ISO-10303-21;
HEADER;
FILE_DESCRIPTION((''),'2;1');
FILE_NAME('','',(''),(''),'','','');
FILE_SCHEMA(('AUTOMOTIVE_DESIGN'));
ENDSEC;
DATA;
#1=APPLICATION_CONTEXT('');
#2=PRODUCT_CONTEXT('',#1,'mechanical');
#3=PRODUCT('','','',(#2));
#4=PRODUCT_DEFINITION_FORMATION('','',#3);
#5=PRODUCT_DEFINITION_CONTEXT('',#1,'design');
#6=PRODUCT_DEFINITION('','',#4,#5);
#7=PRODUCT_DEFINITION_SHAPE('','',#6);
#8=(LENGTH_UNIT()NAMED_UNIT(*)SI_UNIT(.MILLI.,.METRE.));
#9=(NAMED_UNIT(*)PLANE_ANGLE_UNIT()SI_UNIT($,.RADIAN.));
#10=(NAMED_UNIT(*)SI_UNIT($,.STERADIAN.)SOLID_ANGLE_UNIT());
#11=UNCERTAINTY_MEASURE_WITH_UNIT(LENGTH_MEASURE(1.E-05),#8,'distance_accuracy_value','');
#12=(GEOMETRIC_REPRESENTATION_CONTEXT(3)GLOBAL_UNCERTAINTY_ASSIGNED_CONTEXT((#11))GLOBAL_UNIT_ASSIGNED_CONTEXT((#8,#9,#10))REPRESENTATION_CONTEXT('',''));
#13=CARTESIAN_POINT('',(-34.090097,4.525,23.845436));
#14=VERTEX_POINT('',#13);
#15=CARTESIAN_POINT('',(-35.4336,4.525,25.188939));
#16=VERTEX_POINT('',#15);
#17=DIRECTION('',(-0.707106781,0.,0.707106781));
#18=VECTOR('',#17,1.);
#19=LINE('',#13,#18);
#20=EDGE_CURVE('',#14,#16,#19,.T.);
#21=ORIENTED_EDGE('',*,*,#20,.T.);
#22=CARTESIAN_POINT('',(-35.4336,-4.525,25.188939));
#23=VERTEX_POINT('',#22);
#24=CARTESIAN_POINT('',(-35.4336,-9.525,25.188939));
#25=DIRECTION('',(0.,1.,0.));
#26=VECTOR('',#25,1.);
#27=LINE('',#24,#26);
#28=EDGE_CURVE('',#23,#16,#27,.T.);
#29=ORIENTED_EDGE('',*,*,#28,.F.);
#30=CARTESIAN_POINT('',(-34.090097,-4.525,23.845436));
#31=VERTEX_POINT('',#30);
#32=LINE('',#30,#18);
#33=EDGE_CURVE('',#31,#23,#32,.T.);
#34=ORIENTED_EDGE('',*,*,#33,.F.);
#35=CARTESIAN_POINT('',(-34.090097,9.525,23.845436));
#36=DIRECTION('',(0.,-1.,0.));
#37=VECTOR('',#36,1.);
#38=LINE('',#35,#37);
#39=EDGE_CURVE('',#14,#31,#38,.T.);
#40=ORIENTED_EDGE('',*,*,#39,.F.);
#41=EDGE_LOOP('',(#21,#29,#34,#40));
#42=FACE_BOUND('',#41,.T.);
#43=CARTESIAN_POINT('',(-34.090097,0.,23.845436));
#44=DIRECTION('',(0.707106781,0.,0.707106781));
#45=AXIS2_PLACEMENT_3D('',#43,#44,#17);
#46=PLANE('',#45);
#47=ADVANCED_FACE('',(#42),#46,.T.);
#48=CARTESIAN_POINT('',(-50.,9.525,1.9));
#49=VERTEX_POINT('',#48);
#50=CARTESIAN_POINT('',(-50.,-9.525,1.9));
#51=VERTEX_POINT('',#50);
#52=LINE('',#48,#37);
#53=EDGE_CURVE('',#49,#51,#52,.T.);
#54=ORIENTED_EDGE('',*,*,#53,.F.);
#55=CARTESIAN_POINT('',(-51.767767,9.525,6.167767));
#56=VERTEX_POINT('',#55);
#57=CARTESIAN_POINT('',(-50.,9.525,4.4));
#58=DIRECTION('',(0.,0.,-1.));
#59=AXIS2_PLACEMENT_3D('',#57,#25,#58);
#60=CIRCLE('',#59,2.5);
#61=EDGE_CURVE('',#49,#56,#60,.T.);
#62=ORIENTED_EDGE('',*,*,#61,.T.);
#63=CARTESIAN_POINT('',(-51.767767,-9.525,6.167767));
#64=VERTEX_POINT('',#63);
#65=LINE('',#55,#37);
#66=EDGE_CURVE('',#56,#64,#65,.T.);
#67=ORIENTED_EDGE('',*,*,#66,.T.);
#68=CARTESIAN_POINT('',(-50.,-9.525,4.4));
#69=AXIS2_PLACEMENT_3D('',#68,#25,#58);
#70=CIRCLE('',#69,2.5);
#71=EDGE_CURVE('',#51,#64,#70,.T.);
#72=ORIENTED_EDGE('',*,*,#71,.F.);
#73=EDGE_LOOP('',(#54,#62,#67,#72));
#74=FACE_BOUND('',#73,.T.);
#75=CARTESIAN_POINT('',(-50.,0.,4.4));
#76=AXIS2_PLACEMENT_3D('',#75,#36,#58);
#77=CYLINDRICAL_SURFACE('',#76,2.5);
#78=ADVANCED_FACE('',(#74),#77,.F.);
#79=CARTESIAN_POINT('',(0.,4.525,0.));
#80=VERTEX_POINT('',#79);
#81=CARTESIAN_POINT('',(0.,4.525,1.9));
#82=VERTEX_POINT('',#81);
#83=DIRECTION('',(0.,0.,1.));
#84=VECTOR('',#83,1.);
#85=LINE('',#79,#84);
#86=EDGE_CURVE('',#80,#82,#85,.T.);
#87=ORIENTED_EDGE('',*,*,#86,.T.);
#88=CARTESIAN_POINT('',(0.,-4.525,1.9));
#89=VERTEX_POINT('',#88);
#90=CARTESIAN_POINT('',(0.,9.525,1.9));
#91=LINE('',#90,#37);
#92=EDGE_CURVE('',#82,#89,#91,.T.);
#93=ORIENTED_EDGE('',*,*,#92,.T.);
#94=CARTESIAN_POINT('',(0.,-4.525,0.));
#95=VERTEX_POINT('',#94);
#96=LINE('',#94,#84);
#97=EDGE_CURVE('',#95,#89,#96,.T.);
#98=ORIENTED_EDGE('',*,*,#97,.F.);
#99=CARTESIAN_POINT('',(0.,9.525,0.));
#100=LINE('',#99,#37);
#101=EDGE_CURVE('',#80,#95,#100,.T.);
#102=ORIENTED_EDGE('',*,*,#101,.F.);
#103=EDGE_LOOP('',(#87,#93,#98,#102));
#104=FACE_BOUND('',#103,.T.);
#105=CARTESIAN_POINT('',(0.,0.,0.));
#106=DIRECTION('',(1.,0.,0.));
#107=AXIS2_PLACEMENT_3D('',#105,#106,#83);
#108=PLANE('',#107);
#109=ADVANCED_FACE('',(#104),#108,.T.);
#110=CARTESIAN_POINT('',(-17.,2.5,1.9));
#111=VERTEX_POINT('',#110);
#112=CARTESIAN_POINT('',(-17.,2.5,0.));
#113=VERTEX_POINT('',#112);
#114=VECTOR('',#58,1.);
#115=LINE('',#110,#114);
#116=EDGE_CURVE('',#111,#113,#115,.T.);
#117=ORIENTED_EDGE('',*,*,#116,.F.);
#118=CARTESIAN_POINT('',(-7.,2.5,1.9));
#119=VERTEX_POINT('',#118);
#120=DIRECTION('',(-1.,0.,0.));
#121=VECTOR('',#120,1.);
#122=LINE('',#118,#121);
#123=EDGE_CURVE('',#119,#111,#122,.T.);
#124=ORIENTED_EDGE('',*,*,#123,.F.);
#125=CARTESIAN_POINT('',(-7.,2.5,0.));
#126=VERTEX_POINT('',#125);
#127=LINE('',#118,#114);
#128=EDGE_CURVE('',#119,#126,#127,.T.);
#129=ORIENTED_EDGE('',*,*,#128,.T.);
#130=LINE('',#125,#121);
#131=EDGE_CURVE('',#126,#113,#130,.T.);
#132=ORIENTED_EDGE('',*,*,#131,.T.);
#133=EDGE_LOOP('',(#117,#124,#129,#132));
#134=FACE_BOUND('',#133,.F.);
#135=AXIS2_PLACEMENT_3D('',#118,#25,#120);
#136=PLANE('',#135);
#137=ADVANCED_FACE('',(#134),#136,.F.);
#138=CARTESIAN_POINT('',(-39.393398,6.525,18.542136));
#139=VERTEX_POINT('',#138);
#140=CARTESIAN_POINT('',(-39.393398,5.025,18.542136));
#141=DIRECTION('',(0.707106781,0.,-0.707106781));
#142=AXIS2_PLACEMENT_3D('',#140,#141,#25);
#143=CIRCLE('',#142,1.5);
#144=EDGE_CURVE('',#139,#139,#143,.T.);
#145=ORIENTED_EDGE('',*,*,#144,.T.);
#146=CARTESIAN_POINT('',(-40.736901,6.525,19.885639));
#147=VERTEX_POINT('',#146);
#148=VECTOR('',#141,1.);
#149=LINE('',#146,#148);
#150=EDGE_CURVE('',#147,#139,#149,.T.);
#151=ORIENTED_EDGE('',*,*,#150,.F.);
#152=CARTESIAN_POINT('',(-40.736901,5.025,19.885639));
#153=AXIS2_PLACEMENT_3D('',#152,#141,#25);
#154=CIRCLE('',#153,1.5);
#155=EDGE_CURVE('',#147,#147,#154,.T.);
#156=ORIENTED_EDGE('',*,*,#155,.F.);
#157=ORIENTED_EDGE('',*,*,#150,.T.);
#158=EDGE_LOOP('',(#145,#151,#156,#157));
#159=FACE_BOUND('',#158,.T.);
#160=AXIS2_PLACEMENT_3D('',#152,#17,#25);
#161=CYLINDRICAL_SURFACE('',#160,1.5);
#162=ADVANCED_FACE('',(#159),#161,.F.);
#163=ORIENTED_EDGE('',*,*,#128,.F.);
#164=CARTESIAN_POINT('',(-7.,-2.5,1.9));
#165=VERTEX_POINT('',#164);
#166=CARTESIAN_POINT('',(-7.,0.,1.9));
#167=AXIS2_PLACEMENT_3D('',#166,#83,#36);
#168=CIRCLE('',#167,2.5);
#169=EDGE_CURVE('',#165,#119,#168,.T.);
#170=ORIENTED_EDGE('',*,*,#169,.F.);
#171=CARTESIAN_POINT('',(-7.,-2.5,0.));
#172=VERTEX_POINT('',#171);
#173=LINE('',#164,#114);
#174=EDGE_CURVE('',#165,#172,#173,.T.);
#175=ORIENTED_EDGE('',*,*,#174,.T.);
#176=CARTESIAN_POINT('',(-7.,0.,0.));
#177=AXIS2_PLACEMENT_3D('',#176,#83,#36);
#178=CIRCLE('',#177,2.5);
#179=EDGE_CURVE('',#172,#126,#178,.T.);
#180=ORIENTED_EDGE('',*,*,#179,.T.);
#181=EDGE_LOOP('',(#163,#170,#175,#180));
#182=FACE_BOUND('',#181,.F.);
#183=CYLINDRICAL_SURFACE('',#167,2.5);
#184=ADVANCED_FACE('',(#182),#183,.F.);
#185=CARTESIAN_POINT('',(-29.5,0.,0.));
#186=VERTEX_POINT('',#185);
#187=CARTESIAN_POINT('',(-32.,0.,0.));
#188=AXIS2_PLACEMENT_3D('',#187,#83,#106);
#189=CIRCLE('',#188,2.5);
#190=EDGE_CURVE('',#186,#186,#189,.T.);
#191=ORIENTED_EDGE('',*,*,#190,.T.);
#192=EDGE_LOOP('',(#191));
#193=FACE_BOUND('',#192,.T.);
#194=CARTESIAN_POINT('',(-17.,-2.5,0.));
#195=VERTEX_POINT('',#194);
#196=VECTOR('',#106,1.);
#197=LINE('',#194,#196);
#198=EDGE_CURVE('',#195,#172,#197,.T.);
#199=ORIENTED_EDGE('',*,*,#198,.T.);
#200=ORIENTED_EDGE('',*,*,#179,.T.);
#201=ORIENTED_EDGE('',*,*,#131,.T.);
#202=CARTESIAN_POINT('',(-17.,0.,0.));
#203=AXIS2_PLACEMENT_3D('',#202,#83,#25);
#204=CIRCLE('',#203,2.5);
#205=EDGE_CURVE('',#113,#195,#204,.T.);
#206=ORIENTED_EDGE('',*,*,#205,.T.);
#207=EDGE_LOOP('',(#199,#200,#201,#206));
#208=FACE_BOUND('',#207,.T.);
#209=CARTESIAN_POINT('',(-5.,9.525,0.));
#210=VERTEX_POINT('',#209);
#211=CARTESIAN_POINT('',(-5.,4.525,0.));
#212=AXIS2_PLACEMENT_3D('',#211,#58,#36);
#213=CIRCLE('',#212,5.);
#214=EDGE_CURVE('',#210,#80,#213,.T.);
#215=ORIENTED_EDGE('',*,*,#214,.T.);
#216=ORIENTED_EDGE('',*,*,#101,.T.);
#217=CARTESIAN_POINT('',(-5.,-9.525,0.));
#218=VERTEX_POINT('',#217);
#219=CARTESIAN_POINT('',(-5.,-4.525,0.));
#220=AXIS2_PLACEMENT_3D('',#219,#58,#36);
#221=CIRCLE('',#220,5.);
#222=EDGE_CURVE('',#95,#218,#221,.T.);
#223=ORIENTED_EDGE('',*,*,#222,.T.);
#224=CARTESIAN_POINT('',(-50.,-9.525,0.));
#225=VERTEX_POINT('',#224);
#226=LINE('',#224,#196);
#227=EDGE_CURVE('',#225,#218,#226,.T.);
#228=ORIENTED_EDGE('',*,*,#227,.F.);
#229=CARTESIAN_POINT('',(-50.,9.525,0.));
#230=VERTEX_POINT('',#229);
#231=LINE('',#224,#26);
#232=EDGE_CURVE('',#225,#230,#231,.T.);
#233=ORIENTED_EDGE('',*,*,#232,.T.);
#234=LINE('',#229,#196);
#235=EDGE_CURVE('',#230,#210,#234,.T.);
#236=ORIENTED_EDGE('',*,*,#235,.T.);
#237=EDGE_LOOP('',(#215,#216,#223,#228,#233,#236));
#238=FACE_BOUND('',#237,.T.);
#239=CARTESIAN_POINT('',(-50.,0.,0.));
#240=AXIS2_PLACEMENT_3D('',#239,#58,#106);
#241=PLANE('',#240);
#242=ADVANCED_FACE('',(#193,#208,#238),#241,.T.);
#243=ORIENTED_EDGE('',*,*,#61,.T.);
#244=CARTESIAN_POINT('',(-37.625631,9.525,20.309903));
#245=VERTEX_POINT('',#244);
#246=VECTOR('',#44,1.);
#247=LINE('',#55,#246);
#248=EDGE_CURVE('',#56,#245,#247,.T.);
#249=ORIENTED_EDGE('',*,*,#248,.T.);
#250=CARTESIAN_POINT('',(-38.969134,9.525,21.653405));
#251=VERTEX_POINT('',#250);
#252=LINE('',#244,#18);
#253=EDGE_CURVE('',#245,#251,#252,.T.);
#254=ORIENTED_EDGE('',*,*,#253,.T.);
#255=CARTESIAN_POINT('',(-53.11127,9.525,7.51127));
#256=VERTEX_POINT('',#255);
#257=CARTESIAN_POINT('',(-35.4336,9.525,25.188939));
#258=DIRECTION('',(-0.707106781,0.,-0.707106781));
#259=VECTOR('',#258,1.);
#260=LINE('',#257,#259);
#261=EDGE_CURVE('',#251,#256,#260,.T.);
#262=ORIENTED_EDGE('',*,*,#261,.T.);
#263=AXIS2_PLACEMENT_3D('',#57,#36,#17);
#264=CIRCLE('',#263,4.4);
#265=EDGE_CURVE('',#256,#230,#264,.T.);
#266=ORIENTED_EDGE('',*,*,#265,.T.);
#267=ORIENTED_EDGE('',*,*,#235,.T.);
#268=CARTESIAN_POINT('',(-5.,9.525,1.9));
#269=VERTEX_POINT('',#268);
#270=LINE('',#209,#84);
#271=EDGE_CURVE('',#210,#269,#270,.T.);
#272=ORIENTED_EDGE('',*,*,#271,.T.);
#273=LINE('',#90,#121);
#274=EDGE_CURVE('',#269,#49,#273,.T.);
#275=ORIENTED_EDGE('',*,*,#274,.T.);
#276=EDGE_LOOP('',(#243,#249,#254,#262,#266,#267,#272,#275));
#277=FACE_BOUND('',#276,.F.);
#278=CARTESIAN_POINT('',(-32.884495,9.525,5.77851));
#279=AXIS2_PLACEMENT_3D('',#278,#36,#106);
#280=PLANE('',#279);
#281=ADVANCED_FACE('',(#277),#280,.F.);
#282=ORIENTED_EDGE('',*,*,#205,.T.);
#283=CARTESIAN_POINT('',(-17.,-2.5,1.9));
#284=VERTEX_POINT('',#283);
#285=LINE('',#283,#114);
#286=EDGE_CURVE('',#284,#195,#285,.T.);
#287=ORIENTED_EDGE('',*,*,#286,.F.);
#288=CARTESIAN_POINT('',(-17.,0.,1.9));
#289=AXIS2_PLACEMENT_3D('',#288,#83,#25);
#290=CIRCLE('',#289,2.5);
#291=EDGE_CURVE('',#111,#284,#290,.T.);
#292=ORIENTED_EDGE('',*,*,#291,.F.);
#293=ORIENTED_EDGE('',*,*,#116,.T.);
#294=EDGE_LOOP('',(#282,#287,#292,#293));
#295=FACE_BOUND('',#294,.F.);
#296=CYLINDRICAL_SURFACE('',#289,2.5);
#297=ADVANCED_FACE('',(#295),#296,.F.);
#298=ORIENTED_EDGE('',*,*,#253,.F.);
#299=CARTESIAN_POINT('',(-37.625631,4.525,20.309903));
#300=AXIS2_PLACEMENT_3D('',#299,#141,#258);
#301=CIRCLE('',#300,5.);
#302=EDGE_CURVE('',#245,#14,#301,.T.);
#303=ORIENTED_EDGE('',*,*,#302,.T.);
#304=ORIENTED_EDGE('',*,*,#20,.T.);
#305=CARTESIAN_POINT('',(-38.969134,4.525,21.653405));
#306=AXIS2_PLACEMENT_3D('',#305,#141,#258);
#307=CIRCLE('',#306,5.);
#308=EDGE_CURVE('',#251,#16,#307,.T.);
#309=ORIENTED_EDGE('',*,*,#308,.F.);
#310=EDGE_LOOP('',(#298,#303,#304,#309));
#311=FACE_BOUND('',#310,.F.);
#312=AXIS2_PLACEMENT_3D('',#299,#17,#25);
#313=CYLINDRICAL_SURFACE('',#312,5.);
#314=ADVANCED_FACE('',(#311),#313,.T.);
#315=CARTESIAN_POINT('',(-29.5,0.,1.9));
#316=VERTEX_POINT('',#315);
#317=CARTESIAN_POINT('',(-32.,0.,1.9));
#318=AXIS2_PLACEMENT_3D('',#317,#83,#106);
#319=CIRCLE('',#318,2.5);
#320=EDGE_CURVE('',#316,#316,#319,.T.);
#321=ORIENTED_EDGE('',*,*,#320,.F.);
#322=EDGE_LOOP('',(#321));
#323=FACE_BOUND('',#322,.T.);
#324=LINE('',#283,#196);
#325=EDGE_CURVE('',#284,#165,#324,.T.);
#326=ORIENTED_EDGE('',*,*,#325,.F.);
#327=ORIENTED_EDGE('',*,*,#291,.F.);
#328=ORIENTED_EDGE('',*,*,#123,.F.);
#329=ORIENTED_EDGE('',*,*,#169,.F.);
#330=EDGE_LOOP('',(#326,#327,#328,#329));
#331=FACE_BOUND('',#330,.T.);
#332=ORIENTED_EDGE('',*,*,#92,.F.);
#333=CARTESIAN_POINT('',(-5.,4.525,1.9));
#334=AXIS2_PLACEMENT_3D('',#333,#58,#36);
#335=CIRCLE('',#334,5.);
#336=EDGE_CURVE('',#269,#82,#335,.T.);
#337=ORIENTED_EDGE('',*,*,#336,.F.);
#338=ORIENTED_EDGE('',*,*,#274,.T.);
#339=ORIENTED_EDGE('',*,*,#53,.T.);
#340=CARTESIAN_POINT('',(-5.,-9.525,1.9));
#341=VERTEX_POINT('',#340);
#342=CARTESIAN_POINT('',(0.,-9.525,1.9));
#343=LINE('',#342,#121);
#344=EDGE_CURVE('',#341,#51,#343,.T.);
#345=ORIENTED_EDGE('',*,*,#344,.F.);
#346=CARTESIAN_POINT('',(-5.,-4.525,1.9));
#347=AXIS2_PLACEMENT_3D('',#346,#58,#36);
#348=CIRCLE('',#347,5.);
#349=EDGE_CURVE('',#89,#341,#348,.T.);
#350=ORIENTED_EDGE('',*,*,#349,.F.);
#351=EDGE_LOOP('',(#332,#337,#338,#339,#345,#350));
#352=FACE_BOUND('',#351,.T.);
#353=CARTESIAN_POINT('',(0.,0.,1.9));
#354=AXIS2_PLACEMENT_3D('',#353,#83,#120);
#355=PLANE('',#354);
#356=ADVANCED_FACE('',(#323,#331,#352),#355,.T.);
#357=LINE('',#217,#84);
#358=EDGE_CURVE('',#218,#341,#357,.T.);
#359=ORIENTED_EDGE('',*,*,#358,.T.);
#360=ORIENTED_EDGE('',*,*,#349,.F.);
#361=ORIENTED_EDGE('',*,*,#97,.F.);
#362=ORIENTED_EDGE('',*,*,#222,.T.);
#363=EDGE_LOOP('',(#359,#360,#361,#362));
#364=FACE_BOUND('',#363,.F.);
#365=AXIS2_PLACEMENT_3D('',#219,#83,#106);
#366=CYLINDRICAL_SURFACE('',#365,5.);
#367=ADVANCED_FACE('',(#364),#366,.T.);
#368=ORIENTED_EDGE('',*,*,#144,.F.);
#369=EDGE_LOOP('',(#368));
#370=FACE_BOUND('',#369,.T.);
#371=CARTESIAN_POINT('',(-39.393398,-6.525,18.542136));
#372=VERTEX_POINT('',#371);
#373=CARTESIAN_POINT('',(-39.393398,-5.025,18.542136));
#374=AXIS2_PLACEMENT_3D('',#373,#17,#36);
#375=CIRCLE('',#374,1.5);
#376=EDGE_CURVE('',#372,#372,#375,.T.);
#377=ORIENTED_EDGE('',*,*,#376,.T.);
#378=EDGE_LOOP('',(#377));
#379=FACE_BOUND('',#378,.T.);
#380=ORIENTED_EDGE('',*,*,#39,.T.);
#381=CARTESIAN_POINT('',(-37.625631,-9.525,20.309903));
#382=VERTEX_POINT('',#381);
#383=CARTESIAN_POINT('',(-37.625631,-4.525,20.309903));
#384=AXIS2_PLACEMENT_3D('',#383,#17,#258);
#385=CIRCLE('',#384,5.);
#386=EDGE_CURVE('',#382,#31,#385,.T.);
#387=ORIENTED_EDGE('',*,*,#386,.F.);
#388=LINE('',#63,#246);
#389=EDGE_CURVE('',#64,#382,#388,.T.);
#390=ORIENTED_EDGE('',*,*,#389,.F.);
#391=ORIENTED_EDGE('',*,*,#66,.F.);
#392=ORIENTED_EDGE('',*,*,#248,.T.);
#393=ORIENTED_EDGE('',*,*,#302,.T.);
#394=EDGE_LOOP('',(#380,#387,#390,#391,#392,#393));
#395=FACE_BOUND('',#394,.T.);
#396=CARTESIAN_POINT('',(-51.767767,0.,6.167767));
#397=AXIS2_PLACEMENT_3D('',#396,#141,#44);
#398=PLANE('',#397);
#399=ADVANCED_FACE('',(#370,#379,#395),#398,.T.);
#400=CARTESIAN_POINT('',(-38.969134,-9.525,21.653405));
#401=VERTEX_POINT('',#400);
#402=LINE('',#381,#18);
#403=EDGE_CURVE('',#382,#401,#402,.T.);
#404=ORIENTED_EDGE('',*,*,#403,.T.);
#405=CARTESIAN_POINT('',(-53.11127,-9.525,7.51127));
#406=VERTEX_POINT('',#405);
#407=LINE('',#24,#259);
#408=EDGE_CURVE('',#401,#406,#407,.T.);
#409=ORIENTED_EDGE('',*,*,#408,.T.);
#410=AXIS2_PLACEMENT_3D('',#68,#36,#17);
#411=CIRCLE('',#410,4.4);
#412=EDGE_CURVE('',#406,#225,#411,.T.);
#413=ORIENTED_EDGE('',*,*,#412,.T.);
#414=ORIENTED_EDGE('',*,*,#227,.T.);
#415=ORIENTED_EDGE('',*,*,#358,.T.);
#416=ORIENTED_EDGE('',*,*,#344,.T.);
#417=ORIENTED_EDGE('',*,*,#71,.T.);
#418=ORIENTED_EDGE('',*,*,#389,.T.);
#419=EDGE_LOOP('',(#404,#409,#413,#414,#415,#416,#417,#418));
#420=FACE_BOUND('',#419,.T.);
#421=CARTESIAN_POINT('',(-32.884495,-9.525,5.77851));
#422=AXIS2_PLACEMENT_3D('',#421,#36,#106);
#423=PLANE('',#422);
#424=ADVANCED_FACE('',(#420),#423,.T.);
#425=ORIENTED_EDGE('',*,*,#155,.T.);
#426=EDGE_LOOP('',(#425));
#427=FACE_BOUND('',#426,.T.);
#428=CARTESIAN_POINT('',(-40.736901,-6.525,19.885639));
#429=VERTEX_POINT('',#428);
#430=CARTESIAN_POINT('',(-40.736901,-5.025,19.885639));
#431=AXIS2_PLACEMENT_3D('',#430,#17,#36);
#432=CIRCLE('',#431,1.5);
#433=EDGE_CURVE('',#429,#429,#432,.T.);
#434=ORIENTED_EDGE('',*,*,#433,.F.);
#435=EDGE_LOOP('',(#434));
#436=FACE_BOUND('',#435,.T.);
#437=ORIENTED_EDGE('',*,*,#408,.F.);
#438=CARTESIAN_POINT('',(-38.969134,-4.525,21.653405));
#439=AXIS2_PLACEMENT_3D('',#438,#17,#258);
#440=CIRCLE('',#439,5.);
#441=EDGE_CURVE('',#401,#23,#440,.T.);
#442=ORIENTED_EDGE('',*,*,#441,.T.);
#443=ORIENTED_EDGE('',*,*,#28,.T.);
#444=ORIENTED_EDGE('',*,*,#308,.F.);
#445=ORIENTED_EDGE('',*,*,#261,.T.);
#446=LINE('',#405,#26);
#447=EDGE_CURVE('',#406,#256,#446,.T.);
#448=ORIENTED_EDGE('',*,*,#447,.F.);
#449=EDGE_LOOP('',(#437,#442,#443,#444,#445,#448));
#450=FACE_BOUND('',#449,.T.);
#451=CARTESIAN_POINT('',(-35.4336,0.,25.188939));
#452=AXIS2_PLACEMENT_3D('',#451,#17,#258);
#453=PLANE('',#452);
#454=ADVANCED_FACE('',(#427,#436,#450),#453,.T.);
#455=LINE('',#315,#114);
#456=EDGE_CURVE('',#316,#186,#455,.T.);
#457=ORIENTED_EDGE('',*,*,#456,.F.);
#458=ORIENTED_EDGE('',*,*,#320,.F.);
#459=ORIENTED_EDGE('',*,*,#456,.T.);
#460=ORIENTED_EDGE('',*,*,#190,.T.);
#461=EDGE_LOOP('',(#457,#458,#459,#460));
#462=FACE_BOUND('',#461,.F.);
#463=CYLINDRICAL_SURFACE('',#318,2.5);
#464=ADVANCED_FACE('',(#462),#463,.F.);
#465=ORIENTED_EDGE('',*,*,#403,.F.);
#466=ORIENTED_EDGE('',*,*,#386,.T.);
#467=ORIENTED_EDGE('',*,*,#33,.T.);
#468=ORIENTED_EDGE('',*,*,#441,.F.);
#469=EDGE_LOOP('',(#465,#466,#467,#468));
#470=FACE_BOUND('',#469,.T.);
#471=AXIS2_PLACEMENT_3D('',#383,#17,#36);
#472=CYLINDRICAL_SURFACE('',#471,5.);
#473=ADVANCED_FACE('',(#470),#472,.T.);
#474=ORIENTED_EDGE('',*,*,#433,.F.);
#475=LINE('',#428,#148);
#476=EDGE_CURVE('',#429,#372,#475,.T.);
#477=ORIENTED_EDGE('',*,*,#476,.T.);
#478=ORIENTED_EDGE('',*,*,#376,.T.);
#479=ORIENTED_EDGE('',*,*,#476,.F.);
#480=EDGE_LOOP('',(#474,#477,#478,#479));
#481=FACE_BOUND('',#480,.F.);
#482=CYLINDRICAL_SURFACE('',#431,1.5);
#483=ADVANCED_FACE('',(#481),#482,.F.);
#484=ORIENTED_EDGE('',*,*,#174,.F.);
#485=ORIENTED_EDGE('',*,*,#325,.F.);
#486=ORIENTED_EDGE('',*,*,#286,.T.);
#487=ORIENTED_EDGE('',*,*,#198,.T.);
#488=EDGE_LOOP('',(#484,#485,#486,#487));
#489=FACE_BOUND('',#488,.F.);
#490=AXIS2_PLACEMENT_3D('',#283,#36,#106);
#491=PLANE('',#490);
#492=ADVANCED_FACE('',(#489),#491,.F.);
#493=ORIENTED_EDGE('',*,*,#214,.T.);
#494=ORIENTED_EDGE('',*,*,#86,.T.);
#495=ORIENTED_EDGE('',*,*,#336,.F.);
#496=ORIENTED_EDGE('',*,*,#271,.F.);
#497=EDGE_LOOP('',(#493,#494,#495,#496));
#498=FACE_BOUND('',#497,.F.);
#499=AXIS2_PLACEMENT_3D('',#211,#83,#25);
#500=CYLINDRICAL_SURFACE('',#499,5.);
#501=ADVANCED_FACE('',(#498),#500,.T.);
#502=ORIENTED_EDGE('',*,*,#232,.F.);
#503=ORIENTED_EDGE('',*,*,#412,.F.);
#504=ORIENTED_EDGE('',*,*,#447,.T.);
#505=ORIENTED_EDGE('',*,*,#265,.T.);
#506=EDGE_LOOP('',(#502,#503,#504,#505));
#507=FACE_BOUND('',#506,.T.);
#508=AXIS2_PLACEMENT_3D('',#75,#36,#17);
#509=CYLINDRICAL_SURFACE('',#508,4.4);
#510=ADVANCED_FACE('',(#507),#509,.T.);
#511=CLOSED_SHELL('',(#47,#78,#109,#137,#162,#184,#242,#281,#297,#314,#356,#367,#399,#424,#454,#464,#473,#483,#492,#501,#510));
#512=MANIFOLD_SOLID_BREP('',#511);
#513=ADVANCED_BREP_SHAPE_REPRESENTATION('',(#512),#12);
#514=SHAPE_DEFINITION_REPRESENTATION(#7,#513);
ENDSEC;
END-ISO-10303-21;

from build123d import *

# Parameters (mm, degrees)
F1_DEPTH = 9.525
F2_R     = 1.5
F3_DEPTH = 1.9
F4_R     = 2.5
F5_DEPTH = 1.9
F6_R     = 5
F7_R     = 5


# Not quite as in the source:
# - a pattern or mirror of a feature is missing from the dataset's text; its kind, count and spacing are read off the source's solid


with BuildPart() as f1:
    # F0 (on Front) → F1 (new body, symmetric)
    with BuildSketch(Plane.XZ):
        with BuildLine():
            Line((-50, 0), (0, 0))
            Line((0, 0), (0, 1.9))
            Line((0, 1.9), (-50, 1.9))
            ThreePointArc((-50, 1.9), (-52.3096988313, 3.4432914191), (-51.767766953, 6.167766953))
            Line((-51.767766953, 6.167766953), (-34.0900974233, 23.8454364826))
            Line((-34.0900974233, 23.8454364826), (-35.4336003076, 25.1889393669))
            Line((-35.4336003076, 25.1889393669), (-53.1112698372, 7.5112698372))
            ThreePointArc((-53.1112698372, 7.5112698372), (-54.065069943, 2.7161928976), (-50, 0))
        make_face()
    extrude(amount=F1_DEPTH, both=True)

    # F2 (on face) → F3 (cut, through all)
    with BuildSketch(Plane(origin=(-30.3112698372, 0, 30.3112698372), x_dir=(0, -1, 0), z_dir=(-0.7071067812, 0, 0.7071067812))):
        with Locations((5.025, -14.7440692221)):
            Circle(F2_R)
    f3 = extrude(amount=-F3_DEPTH, mode=Mode.SUBTRACT)

    # F3_copies: F3 across plane
    add(f3.mirror(Plane.ZX), mode=Mode.SUBTRACT)

    # F4 (on face) → F5 (cut, through all)
    with BuildSketch(Plane.XY.offset(1.9)):
        with BuildLine():
            Line((-17, -2.5), (-7, -2.5))
            ThreePointArc((-7, -2.5), (-4.5, 0), (-7, 2.5))
            Line((-7, 2.5), (-17, 2.5))
            ThreePointArc((-17, 2.5), (-19.5, 0), (-17, -2.5))
        make_face()
        with Locations((-32, 0)):
            Circle(F4_R)
    extrude(amount=-F5_DEPTH, mode=Mode.SUBTRACT)

    # F6
    f6_edges = [f1.edges().sort_by_distance(p)[0] for p in [
        (0, -9.525, 0.95),
        (0, 9.525, 0.95),
    ]]
    fillet(f6_edges, radius=F6_R)

    # F7
    f7_edges = [f1.edges().sort_by_distance(p)[0] for p in [
        (-34.761849, -9.525, 24.517188),
        (-34.761849, 9.525, 24.517188),
    ]]
    fillet(f7_edges, radius=F7_R)


solid = f1.part
